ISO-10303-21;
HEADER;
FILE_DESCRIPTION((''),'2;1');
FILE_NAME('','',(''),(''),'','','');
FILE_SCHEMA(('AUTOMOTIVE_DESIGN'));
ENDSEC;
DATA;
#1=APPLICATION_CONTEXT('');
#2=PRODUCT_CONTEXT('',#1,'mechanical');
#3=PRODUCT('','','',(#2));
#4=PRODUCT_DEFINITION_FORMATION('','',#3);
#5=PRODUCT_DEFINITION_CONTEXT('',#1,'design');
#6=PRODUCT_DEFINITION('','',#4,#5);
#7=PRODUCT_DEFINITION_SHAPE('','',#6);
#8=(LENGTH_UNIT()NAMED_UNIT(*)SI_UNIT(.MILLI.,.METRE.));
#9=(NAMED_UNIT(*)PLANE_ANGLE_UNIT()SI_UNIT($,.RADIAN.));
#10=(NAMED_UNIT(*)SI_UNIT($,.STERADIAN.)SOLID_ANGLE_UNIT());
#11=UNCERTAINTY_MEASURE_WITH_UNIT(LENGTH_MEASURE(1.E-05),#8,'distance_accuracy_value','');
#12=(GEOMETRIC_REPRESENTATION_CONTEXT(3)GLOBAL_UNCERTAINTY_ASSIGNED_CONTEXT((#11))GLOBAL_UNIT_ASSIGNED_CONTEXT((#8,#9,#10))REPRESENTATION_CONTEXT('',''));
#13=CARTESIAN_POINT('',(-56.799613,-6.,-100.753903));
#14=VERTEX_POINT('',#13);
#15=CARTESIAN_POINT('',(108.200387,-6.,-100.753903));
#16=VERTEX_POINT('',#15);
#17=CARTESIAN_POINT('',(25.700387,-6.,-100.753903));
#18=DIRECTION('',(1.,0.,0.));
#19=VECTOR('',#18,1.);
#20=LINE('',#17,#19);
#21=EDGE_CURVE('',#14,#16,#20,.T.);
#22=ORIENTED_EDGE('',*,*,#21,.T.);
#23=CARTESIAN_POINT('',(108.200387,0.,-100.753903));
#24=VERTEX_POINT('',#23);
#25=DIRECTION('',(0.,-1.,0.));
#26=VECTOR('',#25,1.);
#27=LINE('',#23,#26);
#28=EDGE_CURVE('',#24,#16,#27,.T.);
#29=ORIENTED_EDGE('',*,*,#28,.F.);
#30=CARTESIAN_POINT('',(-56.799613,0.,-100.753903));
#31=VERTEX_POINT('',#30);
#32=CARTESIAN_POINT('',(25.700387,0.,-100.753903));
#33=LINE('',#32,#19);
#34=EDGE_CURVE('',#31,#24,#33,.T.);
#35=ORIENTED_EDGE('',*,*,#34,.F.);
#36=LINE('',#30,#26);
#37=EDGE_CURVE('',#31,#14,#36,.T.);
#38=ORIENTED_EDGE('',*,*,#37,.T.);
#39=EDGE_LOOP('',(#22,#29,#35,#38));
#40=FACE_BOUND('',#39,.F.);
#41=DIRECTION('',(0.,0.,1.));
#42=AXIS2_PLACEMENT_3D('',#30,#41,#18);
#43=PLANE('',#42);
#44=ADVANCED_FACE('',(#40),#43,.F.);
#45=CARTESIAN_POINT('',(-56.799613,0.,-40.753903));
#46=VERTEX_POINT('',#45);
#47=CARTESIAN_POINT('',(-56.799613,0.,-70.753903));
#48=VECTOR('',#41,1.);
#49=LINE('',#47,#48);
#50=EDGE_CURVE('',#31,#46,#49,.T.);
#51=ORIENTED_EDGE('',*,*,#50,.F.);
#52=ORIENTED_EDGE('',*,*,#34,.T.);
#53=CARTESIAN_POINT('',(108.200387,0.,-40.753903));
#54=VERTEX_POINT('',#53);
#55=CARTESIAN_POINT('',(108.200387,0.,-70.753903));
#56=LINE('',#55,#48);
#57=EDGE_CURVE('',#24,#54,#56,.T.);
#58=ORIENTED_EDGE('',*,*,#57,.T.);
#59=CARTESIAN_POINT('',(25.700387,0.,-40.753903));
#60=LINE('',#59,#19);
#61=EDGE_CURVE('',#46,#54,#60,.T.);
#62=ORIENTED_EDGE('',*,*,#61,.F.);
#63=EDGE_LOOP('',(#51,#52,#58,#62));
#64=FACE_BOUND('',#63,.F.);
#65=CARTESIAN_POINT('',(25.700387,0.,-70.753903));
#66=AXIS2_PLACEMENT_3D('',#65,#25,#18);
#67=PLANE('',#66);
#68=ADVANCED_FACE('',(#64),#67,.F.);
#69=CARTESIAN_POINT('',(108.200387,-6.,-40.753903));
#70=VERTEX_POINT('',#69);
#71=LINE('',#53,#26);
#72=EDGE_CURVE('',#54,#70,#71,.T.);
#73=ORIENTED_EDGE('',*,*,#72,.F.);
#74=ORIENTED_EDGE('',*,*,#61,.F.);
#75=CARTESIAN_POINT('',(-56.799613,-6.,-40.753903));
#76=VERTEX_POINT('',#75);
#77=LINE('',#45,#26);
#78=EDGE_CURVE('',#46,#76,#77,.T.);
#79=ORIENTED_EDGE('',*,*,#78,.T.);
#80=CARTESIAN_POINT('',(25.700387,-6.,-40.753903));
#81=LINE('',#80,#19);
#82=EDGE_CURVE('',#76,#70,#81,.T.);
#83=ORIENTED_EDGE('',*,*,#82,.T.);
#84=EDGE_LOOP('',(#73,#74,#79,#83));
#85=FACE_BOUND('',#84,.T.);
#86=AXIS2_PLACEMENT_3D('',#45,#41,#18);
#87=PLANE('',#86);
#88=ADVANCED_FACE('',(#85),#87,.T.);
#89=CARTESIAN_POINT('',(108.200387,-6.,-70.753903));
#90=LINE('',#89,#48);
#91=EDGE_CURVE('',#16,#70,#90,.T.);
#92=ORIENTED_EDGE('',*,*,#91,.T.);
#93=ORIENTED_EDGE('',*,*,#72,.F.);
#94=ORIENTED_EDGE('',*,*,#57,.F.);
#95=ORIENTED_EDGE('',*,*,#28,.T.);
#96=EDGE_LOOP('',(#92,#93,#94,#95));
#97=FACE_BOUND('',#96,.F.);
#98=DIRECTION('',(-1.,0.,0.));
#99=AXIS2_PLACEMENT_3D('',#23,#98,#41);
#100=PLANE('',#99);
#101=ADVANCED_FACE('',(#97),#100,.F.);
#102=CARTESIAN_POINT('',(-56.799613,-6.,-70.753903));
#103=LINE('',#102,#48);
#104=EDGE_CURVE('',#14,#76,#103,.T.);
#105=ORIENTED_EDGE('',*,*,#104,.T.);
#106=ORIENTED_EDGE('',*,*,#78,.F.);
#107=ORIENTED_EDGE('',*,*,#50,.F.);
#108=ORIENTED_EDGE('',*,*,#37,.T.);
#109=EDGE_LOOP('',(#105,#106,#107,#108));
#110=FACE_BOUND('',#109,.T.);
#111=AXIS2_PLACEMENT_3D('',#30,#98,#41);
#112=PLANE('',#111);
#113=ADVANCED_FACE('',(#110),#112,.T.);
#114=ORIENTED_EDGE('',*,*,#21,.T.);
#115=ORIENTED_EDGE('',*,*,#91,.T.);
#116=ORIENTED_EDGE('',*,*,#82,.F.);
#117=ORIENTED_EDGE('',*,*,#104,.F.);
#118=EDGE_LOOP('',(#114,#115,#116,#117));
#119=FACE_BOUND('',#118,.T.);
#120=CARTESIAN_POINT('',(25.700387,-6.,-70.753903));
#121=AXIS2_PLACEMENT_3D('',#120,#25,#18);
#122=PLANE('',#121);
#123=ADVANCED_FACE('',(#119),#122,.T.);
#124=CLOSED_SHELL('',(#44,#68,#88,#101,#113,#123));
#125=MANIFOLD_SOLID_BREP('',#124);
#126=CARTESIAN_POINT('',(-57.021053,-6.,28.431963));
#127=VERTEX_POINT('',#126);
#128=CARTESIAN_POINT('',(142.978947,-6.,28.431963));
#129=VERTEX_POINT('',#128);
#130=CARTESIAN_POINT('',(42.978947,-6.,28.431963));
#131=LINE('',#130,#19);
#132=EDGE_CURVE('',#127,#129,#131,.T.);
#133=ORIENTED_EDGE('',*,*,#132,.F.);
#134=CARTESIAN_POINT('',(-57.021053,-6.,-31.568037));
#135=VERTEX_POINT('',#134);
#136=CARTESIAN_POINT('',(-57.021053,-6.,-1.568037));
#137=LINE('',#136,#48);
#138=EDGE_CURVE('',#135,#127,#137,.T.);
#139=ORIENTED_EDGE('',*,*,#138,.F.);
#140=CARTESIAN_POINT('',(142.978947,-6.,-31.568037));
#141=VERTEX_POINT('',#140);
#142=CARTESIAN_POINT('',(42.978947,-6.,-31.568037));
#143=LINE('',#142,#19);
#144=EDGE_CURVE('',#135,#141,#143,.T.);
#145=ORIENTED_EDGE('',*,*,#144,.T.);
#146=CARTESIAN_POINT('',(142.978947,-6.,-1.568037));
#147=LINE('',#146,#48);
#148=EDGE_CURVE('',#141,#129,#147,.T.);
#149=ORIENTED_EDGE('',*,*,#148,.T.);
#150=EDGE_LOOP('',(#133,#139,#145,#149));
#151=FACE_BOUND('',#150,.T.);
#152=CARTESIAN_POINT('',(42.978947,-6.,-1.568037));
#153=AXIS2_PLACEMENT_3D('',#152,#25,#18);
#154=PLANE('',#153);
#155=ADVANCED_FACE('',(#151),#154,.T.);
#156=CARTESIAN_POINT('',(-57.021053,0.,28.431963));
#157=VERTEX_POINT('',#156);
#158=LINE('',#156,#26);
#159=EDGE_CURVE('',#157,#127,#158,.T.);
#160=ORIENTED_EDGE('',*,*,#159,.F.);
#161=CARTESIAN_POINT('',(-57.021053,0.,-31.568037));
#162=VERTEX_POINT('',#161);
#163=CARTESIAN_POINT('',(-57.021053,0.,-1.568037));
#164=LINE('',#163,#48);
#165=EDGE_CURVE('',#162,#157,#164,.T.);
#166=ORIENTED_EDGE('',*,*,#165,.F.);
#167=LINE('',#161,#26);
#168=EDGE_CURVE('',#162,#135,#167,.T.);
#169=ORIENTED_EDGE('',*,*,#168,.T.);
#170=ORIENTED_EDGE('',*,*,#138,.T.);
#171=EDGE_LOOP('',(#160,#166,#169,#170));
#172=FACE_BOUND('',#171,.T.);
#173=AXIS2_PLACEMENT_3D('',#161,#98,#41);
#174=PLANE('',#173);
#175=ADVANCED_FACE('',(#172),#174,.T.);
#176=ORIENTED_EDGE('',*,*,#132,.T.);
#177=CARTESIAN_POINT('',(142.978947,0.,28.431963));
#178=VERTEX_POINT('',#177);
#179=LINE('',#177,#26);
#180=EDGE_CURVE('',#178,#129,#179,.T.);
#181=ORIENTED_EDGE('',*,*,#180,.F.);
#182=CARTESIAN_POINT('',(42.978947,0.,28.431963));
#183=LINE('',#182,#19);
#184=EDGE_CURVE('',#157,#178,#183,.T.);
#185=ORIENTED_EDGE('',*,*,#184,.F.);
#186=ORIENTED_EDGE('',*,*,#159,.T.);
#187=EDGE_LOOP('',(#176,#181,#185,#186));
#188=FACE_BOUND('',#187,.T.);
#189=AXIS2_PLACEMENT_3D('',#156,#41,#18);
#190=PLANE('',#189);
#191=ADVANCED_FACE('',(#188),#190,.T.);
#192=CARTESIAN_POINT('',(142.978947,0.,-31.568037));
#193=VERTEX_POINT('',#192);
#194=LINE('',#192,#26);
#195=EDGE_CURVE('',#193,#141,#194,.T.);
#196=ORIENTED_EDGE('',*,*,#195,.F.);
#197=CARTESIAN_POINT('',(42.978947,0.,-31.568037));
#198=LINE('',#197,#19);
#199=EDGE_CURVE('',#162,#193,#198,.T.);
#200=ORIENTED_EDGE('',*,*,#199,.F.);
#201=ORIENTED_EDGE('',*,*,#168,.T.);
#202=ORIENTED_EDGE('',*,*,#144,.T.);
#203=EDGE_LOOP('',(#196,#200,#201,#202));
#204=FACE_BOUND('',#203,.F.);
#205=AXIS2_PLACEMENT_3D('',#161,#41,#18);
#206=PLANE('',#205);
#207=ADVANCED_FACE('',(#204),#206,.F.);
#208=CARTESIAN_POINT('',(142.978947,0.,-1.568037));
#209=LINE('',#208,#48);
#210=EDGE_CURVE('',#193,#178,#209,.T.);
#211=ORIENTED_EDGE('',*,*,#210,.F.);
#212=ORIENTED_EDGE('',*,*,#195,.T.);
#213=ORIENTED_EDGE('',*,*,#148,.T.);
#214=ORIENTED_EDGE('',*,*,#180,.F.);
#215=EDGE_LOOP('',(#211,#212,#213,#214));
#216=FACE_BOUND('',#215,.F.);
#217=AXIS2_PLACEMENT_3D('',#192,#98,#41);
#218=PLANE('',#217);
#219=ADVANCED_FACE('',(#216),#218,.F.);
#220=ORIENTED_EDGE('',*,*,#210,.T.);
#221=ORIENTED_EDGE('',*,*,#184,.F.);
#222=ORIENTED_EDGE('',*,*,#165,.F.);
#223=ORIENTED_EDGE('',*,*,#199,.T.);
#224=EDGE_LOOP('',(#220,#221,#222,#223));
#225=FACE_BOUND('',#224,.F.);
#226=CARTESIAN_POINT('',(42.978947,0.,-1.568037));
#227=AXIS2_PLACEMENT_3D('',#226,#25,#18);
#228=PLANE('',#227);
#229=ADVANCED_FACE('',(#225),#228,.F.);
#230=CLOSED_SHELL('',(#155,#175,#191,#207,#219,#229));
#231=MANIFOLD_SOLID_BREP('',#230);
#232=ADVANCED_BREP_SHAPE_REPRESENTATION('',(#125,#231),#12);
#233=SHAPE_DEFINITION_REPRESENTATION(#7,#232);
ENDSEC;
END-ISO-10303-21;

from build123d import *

# Parameters (mm, degrees)
F0_W     = 200
F0_H     = 60
F1_DEPTH = 6
F2_DEPTH = 6
F0_W_2   = 165


# Not quite as in the source:
# - a feature names something its author has since deleted; it is built from what else it names


with BuildPart() as f1:
    # F0 (on Front) → F1 (new body)
    with BuildSketch(Plane.XZ):
        with Locations((42.9789469411, -1.5680367857)):
            Rectangle(F0_W, F0_H)
    extrude(amount=F1_DEPTH)

    # F0 (on Front) → F2 (join)
    with BuildSketch(Plane.XZ):
        with Locations((42.9789469411, -1.5680367857)):
            Rectangle(F0_W, F0_H)
    extrude(amount=F2_DEPTH)


with BuildPart() as f2:
    # F0 (on Front) → F2, piece 2 (new body)
    with BuildSketch(Plane.XZ):
        with Locations((25.7003870606, -70.753903389)):
            Rectangle(F0_W_2, F0_H)
    extrude(amount=F2_DEPTH)


solid = Compound([f1.part, f2.part])
